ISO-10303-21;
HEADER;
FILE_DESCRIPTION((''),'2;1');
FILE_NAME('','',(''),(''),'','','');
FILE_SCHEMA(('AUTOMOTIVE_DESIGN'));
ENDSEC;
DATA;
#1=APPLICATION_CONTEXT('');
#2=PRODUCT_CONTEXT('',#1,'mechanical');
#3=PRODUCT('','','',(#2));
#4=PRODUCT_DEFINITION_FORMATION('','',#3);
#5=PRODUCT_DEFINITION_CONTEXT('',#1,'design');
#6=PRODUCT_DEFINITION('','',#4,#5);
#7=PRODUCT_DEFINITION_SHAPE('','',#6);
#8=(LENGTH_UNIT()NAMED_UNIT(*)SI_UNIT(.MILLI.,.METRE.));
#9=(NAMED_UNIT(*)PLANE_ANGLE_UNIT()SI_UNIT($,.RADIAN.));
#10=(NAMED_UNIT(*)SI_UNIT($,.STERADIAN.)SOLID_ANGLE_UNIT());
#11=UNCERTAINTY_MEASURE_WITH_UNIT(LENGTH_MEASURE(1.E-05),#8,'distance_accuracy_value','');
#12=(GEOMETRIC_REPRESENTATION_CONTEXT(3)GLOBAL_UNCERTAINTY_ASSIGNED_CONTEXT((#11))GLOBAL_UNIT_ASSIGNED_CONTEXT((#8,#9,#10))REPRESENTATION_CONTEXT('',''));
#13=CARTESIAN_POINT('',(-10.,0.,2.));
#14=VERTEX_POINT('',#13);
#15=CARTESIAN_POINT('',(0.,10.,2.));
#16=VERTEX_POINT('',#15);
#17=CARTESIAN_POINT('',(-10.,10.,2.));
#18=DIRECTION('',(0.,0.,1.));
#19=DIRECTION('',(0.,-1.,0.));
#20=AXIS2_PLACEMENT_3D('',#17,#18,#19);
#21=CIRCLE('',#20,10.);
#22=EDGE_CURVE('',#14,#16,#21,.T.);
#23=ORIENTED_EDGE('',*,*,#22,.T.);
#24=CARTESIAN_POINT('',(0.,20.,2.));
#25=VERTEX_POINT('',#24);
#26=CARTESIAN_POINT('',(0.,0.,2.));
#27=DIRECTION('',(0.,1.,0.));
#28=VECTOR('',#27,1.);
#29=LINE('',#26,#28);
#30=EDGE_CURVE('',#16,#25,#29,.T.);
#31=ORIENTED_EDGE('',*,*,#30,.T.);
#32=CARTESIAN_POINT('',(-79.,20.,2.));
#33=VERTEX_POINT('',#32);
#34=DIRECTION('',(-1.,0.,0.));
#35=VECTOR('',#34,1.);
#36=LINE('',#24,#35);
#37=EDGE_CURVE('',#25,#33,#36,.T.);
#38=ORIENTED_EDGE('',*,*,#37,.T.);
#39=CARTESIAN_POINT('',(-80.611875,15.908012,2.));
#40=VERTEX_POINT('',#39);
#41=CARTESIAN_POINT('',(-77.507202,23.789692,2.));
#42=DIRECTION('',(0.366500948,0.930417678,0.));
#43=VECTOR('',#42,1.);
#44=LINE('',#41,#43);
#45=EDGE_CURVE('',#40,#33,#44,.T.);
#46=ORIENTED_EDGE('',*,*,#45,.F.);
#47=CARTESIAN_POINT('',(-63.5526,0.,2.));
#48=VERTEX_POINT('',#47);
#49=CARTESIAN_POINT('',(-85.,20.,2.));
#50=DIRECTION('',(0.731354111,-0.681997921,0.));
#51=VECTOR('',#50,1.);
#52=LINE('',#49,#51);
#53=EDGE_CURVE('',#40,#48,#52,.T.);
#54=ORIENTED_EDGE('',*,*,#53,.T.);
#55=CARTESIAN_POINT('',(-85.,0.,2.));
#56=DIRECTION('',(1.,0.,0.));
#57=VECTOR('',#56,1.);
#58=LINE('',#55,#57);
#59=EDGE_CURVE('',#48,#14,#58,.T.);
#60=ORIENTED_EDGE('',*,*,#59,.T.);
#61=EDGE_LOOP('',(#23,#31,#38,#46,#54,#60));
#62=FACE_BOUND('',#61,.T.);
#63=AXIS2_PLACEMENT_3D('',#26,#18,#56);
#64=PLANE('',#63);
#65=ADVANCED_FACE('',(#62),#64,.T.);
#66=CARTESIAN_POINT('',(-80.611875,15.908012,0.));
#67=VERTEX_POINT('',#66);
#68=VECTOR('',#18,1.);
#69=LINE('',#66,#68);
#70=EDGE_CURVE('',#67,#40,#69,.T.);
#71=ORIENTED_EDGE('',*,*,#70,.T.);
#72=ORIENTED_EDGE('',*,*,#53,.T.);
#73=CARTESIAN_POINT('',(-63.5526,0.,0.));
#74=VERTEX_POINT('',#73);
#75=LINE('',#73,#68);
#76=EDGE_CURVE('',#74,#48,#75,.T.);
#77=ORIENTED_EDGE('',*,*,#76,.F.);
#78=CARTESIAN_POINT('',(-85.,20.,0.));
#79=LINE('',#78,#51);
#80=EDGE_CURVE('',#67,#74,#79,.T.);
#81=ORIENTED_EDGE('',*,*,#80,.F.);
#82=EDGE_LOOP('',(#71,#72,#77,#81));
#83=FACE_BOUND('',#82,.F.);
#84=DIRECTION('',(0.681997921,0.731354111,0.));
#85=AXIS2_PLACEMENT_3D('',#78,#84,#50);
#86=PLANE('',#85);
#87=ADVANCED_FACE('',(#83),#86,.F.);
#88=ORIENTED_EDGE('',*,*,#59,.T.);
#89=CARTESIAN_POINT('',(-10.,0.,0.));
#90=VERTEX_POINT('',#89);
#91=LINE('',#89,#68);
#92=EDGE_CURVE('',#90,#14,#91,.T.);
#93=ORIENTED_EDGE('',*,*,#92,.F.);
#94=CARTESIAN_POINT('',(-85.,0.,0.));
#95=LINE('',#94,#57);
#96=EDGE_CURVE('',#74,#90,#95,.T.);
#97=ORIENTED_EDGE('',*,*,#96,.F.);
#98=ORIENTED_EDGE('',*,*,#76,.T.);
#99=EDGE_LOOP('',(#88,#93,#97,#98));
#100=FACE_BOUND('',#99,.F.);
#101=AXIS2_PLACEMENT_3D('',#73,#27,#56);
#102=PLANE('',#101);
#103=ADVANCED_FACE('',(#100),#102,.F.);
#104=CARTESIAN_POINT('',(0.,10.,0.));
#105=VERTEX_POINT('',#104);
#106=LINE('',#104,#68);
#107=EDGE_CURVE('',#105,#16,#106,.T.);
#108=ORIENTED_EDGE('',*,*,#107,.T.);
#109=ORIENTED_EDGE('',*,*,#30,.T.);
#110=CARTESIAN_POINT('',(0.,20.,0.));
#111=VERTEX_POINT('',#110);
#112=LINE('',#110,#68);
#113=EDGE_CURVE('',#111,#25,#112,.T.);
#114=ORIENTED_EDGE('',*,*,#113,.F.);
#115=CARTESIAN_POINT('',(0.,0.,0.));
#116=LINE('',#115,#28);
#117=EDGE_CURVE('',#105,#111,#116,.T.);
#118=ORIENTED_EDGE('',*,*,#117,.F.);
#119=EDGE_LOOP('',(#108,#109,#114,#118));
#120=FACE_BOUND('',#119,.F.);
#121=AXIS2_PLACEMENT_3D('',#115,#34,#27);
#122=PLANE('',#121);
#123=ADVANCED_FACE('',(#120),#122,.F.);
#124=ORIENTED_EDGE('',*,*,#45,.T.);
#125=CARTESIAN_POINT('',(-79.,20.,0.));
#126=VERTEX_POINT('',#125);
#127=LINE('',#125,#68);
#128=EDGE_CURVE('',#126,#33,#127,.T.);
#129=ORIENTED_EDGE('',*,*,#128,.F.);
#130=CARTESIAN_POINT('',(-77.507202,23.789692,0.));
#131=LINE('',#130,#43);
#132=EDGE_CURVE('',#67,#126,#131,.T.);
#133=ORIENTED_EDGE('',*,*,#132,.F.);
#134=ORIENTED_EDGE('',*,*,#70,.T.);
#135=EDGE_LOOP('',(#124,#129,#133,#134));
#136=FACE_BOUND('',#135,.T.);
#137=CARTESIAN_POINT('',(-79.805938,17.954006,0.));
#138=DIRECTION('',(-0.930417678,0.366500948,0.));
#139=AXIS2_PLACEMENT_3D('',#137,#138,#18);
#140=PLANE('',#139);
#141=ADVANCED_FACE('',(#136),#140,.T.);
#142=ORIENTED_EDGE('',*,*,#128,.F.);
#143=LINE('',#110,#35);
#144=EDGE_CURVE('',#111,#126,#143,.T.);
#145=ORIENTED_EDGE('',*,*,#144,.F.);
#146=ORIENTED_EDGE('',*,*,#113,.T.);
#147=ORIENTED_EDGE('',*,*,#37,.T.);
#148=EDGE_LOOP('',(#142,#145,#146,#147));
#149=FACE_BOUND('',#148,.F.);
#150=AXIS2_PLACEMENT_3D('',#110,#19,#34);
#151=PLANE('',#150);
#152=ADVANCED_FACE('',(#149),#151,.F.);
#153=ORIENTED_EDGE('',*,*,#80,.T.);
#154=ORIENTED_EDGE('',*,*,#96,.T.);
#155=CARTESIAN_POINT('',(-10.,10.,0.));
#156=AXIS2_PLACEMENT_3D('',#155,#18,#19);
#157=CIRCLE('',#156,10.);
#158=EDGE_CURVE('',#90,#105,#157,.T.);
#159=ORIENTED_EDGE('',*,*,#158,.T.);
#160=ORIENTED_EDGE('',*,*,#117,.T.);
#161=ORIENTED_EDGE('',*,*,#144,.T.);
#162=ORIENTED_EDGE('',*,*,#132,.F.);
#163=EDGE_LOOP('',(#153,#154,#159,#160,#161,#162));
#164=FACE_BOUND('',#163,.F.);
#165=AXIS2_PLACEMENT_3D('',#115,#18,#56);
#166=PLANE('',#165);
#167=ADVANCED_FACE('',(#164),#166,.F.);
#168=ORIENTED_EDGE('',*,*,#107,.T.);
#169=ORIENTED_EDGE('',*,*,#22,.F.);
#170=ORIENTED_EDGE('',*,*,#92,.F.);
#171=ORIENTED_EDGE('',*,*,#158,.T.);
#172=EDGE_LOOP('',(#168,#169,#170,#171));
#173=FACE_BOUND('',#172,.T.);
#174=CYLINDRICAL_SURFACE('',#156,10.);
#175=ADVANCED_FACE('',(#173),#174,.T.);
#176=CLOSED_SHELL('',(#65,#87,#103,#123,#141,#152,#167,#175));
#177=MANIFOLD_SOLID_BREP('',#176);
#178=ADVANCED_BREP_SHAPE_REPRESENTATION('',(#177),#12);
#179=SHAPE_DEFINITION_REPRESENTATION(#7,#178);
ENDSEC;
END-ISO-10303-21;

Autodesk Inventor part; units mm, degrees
ref_plane "YZ Plane" through (0, 0, 0) normal (1, 0, 0) x (0, 1, 0)
ref_plane "XZ Plane" through (0, 0, 0) normal (0, 1, 0) x (-1, 0, 0)
ref_plane "XY Plane" through (0, 0, 0) normal (0, 0, 1) x (1, 0, 0)
sketch "Sketch2" plane through (0, 0, 0) normal (0, 0, 1) x (1, 0, 0)
  line L0 (0, 0) -> (0, 20)
  line L1 (0, 20) -> (-85, 20)
  line L2 (-85, 20) -> (-85, 0)
  line L3 (-85, 0) -> (0, 0)
  line L4 (-85, 20) -> (-63.5526, 0)
  dimension "d10" = 20
  dimension "d30" = 85
  dimension "d31" = 43
extrude "Plate1" add sketch "Sketch2" along normal blind 2 contours L3 L4 L1 L0
fillet "Corner Round2" radius 10 1 edges at (0, 0, 1)
chamfer "Corner Chamfer1" distance 6 angle 45 1 edges at (-85, 20, 1)
equation "\"d7\" = Thickness"
equation "\"BendReliefWidth\" = Thickness"
equation "\"BendReliefDepth\" = 0.5 * Thickness"
equation "\"CornerReliefSize\" = 4 * Thickness"
equation "\"MinimumRemnant\" = 2 * Thickness"
equation "\"TransitionRadius\" = BendRadius"
equation "\"JacobiRadiusSize\" = BendRadius"
equation "\"GapSize\" = Thickness"
equation "\"Thickness\" = 2"
equation "\"BendRadius\" = 2.75"
properties part number "MSC 125 ROСKET PILLAR" material "Stainless Steel"
